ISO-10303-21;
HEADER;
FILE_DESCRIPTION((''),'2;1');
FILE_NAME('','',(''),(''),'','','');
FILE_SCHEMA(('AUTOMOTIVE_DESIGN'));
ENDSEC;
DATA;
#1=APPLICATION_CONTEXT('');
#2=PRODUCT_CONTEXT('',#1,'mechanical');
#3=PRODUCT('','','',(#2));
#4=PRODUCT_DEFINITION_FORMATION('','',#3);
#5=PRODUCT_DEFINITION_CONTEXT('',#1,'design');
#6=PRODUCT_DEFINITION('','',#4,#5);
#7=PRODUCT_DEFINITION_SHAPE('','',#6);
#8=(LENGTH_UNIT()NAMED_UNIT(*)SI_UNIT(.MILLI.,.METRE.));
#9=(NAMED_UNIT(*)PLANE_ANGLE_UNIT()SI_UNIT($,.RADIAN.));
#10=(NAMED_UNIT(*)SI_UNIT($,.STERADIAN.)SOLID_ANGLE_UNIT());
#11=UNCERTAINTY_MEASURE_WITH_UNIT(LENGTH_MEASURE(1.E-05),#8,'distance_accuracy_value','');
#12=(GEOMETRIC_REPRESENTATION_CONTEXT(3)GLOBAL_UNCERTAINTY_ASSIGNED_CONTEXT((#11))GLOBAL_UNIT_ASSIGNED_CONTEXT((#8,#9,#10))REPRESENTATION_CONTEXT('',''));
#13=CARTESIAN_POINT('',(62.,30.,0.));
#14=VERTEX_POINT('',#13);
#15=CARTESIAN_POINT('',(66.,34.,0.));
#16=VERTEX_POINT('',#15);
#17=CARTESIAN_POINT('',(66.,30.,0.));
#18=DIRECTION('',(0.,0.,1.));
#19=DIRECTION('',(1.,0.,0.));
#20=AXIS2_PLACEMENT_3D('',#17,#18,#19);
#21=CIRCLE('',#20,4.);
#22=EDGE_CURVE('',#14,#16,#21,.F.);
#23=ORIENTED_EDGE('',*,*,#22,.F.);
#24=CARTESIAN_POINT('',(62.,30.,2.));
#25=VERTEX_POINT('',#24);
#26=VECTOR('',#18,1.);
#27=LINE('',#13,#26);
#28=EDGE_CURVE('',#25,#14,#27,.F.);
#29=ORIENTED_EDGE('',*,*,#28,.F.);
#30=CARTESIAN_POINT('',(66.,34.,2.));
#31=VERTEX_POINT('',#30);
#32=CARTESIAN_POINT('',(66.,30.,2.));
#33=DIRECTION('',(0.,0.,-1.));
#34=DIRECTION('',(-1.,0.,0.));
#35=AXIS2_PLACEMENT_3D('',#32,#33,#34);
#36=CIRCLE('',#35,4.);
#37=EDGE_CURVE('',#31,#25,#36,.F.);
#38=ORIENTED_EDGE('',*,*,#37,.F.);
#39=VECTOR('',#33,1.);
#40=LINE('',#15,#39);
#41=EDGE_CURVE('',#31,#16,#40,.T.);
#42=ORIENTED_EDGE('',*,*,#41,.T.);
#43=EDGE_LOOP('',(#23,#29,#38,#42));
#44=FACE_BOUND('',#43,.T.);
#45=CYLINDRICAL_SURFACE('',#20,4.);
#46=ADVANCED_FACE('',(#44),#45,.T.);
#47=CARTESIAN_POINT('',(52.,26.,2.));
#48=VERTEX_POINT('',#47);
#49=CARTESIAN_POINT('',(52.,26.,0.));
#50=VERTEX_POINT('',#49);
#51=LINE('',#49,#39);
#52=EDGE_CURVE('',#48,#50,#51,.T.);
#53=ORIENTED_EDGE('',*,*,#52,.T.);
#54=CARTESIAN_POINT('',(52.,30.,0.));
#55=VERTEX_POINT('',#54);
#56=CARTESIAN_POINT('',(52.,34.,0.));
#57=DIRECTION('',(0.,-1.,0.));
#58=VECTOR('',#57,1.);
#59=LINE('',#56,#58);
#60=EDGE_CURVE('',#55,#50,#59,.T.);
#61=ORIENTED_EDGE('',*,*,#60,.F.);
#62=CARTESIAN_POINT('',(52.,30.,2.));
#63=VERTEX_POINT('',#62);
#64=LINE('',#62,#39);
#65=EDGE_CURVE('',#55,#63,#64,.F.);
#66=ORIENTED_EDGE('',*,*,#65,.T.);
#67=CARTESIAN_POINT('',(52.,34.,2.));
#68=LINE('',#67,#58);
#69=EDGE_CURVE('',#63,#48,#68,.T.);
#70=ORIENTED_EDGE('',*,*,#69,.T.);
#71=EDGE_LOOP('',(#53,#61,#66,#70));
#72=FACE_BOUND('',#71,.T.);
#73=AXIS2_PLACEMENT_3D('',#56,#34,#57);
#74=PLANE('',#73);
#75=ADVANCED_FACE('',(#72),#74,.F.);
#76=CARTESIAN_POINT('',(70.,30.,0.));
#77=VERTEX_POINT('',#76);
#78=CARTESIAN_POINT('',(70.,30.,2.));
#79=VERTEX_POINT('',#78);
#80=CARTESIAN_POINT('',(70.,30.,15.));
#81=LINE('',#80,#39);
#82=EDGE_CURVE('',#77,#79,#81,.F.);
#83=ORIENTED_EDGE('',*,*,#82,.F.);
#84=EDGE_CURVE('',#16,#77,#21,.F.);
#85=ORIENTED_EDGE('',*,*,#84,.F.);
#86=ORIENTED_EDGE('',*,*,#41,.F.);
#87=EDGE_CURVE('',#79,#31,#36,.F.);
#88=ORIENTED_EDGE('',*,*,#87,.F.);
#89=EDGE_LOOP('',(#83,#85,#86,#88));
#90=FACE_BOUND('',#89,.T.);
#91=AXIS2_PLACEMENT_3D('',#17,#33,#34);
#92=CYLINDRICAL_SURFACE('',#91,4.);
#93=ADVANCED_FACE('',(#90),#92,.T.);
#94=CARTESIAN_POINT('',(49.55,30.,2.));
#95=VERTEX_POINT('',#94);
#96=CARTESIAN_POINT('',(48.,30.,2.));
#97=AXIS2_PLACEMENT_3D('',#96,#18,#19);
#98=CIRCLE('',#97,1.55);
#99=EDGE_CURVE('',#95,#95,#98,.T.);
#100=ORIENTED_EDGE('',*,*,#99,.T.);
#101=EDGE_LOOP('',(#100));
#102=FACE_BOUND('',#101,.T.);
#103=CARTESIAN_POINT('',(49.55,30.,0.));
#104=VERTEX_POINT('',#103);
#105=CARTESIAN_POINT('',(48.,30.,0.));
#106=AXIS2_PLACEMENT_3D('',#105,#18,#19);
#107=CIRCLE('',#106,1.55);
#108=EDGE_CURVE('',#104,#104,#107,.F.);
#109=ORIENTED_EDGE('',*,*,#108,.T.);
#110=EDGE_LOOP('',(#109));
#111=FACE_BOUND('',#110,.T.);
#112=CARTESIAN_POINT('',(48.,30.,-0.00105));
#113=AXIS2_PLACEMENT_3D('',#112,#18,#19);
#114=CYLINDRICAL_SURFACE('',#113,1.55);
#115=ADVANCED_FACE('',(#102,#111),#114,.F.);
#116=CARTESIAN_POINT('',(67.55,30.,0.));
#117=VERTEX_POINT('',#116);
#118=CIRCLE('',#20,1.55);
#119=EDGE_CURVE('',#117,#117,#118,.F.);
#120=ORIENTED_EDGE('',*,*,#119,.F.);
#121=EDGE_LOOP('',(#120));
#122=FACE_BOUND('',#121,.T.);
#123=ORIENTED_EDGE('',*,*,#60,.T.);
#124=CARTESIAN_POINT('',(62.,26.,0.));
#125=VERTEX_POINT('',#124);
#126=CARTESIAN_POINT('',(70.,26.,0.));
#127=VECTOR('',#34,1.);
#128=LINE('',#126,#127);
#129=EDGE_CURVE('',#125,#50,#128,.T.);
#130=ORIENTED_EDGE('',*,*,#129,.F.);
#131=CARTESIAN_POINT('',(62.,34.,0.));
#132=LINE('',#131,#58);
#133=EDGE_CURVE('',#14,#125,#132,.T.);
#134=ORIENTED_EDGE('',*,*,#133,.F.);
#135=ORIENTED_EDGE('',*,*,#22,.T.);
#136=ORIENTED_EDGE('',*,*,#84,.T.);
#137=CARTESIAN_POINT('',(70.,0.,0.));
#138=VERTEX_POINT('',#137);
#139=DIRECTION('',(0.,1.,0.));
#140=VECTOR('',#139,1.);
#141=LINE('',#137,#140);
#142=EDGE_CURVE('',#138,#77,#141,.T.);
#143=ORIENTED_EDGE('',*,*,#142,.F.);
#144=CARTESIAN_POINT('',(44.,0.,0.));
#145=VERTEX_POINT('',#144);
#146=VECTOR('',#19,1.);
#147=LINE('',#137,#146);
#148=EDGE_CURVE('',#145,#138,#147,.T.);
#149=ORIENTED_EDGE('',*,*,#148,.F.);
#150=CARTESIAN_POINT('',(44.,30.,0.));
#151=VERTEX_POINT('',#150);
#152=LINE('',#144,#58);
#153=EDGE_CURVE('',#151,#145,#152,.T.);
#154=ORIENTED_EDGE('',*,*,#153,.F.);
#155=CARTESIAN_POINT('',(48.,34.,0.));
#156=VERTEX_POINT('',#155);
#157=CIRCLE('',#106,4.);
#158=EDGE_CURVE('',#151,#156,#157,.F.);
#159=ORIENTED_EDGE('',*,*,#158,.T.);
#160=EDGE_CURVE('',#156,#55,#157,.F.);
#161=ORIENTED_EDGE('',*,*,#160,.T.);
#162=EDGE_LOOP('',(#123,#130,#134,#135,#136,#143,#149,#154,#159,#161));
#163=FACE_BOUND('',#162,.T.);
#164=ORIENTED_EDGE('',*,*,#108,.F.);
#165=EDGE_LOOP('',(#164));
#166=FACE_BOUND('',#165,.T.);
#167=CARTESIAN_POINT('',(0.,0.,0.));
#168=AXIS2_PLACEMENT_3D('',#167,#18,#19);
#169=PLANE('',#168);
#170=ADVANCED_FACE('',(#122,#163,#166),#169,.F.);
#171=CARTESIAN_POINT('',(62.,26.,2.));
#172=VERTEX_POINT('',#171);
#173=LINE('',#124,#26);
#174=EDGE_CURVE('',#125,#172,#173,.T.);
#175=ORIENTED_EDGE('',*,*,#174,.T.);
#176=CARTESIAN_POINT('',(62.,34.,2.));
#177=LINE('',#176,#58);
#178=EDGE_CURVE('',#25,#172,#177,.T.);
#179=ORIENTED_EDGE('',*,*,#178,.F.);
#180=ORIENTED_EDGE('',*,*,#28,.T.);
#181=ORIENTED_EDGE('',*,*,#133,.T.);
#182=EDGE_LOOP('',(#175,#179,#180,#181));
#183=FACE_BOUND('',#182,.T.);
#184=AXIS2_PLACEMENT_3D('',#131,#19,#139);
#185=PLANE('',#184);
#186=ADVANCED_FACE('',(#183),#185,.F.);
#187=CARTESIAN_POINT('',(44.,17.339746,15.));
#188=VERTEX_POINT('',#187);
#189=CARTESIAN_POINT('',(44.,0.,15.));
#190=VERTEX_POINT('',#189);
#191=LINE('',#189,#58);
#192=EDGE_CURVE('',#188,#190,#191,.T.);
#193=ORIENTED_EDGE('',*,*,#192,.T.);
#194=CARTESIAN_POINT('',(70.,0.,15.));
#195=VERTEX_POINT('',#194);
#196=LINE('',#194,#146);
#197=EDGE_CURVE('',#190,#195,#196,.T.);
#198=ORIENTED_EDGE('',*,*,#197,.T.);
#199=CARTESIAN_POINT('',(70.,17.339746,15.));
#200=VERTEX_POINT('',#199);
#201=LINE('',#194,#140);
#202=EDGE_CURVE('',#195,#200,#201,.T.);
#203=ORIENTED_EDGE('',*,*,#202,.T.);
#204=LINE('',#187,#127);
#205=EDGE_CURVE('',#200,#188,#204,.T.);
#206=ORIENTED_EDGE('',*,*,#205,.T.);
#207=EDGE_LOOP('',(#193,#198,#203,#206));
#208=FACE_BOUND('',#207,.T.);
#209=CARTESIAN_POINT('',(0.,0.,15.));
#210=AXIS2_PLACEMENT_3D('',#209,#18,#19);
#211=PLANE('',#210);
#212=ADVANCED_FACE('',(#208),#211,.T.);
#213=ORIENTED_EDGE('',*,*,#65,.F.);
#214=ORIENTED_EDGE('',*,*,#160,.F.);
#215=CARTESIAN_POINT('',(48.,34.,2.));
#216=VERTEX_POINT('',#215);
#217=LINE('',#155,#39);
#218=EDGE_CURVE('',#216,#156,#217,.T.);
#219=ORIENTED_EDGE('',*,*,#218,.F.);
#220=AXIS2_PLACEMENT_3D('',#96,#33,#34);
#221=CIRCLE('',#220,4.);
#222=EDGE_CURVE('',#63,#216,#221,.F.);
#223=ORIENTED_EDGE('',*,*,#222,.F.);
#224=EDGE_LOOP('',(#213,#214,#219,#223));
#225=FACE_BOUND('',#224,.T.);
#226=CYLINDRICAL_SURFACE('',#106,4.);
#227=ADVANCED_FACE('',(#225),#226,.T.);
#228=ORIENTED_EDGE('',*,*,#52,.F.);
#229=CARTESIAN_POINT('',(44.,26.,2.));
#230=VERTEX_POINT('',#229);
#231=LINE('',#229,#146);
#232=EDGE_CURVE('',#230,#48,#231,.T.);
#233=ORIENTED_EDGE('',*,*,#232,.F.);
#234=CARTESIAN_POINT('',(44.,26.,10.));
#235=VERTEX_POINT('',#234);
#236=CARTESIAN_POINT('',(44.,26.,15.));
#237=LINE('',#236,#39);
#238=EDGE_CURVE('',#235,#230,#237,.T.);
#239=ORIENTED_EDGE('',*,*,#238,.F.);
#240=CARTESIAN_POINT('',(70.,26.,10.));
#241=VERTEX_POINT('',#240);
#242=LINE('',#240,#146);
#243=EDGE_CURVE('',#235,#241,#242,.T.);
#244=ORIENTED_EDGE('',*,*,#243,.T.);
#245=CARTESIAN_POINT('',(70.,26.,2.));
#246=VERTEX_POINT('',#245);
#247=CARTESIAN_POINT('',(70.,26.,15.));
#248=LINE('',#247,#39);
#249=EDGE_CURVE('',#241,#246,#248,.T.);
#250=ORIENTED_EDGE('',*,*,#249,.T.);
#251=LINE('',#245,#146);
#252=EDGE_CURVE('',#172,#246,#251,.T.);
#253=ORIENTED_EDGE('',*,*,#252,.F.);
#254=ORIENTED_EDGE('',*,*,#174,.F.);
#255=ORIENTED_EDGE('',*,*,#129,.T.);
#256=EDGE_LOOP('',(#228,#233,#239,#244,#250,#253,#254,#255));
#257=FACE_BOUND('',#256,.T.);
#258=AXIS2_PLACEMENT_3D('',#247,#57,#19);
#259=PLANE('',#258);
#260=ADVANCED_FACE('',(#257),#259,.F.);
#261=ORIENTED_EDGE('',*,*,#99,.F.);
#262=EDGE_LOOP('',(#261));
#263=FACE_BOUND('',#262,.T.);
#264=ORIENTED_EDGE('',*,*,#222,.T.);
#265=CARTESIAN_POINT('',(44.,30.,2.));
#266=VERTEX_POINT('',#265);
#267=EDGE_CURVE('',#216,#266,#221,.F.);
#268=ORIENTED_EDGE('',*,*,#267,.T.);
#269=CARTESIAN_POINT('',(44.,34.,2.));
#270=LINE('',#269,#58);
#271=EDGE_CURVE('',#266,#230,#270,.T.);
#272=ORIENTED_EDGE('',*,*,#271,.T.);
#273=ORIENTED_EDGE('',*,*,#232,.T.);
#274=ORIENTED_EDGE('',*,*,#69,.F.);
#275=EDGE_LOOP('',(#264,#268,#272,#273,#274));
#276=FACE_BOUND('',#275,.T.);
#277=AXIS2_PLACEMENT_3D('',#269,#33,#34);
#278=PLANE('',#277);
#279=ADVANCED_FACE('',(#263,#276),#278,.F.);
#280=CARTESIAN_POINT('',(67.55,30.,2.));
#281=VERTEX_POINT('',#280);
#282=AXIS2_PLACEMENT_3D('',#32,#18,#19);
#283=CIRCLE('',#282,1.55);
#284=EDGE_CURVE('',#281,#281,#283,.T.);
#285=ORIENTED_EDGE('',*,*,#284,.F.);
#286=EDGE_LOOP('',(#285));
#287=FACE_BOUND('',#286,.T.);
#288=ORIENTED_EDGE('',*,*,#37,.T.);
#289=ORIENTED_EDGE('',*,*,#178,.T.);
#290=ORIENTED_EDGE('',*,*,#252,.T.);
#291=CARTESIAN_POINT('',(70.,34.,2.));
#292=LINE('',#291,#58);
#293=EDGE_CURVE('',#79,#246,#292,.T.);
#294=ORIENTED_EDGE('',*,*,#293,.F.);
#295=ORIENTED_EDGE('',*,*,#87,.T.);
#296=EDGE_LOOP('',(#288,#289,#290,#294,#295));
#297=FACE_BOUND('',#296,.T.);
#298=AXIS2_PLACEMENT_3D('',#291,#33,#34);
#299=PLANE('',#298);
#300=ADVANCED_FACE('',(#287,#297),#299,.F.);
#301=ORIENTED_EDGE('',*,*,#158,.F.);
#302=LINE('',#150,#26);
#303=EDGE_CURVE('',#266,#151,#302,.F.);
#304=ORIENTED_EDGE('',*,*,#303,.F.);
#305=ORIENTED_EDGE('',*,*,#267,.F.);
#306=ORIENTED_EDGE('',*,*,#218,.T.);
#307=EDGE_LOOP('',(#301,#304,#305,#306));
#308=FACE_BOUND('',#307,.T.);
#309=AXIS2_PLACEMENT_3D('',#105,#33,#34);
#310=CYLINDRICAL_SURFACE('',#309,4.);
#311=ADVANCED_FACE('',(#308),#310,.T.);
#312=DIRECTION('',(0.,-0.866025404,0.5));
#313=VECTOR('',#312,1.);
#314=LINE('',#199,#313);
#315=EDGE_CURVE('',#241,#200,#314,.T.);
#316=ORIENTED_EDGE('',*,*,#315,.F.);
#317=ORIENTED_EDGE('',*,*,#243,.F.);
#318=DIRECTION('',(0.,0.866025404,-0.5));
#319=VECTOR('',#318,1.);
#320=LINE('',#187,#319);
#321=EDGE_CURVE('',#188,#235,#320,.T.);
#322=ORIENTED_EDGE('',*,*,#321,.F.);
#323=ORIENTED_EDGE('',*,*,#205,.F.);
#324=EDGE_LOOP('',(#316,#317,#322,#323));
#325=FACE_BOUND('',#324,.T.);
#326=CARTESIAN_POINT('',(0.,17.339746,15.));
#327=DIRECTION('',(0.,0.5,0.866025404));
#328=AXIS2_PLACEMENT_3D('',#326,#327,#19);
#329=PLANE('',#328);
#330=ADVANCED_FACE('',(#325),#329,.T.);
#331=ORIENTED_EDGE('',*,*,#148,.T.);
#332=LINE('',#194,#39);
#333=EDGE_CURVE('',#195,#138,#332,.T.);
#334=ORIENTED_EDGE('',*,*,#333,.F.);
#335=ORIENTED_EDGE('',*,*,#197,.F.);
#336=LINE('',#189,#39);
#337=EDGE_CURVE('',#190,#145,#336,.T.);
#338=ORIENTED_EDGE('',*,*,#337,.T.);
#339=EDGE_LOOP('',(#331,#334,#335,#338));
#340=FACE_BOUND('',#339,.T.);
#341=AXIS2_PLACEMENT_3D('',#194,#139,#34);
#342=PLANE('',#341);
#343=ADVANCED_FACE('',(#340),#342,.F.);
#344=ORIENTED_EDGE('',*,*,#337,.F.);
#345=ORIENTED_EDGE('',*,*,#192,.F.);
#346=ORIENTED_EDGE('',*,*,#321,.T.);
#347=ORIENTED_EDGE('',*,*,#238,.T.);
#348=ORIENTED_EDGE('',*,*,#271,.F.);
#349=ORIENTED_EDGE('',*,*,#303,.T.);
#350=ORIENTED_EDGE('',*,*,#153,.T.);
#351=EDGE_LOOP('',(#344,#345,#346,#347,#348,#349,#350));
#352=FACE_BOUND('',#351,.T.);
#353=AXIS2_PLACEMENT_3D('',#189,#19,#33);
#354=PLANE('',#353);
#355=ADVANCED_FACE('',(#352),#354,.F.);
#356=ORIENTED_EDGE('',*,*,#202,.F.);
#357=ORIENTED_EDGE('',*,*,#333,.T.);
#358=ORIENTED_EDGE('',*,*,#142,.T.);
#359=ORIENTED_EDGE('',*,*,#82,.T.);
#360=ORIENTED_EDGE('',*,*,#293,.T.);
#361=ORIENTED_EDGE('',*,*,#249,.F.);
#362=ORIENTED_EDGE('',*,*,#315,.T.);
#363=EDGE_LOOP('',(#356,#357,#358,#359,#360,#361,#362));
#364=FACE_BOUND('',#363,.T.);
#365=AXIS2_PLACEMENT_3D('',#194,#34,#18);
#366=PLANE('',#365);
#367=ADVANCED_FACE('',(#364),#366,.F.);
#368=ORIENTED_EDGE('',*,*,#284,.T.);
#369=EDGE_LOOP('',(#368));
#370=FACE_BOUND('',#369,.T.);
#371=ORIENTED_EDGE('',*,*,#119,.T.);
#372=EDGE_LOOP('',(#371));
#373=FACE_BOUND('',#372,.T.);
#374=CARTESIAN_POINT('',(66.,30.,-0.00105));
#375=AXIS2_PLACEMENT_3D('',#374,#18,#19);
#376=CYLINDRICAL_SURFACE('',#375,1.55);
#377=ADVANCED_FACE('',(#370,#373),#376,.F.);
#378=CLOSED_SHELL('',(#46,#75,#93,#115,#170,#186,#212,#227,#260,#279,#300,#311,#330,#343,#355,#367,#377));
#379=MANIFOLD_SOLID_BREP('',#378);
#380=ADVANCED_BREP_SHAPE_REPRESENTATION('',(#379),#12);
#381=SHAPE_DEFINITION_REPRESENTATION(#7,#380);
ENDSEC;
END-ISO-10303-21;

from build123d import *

# Parameters (mm, degrees)
SKETCH1_W           = 26
SKETCH1_H           = 26
BOSS_EXTRUDE1_DEPTH = 15
CHAMFER1_SIZE       = 5
CHAMFER1_SIZE2      = 8.660254038
SKETCH2_W           = 8
SKETCH2_H           = 2
BOSS_EXTRUDE2_DEPTH = 8
FILLET1_R           = 4
CUT_EXTRUDE2_REACH  = 80.899
SKETCH5_R           = 1.55


with BuildPart() as part:
    # Sketch1 → Boss-Extrude1 (new body)
    with BuildSketch(Plane.XY):
        with Locations((57, 13)):
            Rectangle(SKETCH1_W, SKETCH1_H)
    extrude(amount=BOSS_EXTRUDE1_DEPTH)

    # Chamfer1
    chamfer1_edges = [part.edges().sort_by_distance(p)[0] for p in [
        (57, 26, 15),
    ]]
    chamfer1_side = [part.faces().sort_by_distance(p)[0] for p in [
        (57, 26, 7.5),
    ]]
    chamfer(chamfer1_edges, length=CHAMFER1_SIZE, length2=CHAMFER1_SIZE2, reference=chamfer1_side[0])

    # Sketch2 → Boss-Extrude2 (add)
    with BuildSketch(Plane(origin=(0, 26, 0), x_dir=(1, 0, 0), z_dir=(0, 1, 0))):
        with Locations((48, -1)):
            Rectangle(SKETCH2_W, SKETCH2_H)
        with Locations((66, -1)):
            Rectangle(SKETCH2_W, SKETCH2_H)
    extrude(amount=BOSS_EXTRUDE2_DEPTH)

    # Fillet1
    fillet1_edges = [part.edges().sort_by_distance(p)[0] for p in [
        (44, 34, 1),
        (52, 34, 1),
        (62, 34, 1),
        (70, 34, 1),
    ]]
    fillet(fillet1_edges, radius=FILLET1_R - 0.0001)  # a hair under: the kernel refuses the full size

    # Sketch5 → Cut-Extrude2 (cut, up to next)
    with BuildSketch(Plane.XY.offset(2), mode=Mode.PRIVATE) as cut_extrude2_sk1:
        with Locations((66, 30)):
            Circle(SKETCH5_R)
    cut_extrude2_tool1 = extrude(cut_extrude2_sk1.sketch, amount=-CUT_EXTRUDE2_REACH, mode=Mode.PRIVATE) & part.part
    # Sketch5 → Cut-Extrude2 (cut, up to next)
    with BuildSketch(Plane.XY.offset(2), mode=Mode.PRIVATE) as cut_extrude2_sk2:
        with Locations((48, 30)):
            Circle(SKETCH5_R)
    cut_extrude2_tool2 = extrude(cut_extrude2_sk2.sketch, amount=-CUT_EXTRUDE2_REACH, mode=Mode.PRIVATE) & part.part
    add(cut_extrude2_tool1.solids().sort_by_distance((66, 30, 2))[0], mode=Mode.SUBTRACT)
    add(cut_extrude2_tool2.solids().sort_by_distance((48, 30, 2))[0], mode=Mode.SUBTRACT)


solid = part.part
